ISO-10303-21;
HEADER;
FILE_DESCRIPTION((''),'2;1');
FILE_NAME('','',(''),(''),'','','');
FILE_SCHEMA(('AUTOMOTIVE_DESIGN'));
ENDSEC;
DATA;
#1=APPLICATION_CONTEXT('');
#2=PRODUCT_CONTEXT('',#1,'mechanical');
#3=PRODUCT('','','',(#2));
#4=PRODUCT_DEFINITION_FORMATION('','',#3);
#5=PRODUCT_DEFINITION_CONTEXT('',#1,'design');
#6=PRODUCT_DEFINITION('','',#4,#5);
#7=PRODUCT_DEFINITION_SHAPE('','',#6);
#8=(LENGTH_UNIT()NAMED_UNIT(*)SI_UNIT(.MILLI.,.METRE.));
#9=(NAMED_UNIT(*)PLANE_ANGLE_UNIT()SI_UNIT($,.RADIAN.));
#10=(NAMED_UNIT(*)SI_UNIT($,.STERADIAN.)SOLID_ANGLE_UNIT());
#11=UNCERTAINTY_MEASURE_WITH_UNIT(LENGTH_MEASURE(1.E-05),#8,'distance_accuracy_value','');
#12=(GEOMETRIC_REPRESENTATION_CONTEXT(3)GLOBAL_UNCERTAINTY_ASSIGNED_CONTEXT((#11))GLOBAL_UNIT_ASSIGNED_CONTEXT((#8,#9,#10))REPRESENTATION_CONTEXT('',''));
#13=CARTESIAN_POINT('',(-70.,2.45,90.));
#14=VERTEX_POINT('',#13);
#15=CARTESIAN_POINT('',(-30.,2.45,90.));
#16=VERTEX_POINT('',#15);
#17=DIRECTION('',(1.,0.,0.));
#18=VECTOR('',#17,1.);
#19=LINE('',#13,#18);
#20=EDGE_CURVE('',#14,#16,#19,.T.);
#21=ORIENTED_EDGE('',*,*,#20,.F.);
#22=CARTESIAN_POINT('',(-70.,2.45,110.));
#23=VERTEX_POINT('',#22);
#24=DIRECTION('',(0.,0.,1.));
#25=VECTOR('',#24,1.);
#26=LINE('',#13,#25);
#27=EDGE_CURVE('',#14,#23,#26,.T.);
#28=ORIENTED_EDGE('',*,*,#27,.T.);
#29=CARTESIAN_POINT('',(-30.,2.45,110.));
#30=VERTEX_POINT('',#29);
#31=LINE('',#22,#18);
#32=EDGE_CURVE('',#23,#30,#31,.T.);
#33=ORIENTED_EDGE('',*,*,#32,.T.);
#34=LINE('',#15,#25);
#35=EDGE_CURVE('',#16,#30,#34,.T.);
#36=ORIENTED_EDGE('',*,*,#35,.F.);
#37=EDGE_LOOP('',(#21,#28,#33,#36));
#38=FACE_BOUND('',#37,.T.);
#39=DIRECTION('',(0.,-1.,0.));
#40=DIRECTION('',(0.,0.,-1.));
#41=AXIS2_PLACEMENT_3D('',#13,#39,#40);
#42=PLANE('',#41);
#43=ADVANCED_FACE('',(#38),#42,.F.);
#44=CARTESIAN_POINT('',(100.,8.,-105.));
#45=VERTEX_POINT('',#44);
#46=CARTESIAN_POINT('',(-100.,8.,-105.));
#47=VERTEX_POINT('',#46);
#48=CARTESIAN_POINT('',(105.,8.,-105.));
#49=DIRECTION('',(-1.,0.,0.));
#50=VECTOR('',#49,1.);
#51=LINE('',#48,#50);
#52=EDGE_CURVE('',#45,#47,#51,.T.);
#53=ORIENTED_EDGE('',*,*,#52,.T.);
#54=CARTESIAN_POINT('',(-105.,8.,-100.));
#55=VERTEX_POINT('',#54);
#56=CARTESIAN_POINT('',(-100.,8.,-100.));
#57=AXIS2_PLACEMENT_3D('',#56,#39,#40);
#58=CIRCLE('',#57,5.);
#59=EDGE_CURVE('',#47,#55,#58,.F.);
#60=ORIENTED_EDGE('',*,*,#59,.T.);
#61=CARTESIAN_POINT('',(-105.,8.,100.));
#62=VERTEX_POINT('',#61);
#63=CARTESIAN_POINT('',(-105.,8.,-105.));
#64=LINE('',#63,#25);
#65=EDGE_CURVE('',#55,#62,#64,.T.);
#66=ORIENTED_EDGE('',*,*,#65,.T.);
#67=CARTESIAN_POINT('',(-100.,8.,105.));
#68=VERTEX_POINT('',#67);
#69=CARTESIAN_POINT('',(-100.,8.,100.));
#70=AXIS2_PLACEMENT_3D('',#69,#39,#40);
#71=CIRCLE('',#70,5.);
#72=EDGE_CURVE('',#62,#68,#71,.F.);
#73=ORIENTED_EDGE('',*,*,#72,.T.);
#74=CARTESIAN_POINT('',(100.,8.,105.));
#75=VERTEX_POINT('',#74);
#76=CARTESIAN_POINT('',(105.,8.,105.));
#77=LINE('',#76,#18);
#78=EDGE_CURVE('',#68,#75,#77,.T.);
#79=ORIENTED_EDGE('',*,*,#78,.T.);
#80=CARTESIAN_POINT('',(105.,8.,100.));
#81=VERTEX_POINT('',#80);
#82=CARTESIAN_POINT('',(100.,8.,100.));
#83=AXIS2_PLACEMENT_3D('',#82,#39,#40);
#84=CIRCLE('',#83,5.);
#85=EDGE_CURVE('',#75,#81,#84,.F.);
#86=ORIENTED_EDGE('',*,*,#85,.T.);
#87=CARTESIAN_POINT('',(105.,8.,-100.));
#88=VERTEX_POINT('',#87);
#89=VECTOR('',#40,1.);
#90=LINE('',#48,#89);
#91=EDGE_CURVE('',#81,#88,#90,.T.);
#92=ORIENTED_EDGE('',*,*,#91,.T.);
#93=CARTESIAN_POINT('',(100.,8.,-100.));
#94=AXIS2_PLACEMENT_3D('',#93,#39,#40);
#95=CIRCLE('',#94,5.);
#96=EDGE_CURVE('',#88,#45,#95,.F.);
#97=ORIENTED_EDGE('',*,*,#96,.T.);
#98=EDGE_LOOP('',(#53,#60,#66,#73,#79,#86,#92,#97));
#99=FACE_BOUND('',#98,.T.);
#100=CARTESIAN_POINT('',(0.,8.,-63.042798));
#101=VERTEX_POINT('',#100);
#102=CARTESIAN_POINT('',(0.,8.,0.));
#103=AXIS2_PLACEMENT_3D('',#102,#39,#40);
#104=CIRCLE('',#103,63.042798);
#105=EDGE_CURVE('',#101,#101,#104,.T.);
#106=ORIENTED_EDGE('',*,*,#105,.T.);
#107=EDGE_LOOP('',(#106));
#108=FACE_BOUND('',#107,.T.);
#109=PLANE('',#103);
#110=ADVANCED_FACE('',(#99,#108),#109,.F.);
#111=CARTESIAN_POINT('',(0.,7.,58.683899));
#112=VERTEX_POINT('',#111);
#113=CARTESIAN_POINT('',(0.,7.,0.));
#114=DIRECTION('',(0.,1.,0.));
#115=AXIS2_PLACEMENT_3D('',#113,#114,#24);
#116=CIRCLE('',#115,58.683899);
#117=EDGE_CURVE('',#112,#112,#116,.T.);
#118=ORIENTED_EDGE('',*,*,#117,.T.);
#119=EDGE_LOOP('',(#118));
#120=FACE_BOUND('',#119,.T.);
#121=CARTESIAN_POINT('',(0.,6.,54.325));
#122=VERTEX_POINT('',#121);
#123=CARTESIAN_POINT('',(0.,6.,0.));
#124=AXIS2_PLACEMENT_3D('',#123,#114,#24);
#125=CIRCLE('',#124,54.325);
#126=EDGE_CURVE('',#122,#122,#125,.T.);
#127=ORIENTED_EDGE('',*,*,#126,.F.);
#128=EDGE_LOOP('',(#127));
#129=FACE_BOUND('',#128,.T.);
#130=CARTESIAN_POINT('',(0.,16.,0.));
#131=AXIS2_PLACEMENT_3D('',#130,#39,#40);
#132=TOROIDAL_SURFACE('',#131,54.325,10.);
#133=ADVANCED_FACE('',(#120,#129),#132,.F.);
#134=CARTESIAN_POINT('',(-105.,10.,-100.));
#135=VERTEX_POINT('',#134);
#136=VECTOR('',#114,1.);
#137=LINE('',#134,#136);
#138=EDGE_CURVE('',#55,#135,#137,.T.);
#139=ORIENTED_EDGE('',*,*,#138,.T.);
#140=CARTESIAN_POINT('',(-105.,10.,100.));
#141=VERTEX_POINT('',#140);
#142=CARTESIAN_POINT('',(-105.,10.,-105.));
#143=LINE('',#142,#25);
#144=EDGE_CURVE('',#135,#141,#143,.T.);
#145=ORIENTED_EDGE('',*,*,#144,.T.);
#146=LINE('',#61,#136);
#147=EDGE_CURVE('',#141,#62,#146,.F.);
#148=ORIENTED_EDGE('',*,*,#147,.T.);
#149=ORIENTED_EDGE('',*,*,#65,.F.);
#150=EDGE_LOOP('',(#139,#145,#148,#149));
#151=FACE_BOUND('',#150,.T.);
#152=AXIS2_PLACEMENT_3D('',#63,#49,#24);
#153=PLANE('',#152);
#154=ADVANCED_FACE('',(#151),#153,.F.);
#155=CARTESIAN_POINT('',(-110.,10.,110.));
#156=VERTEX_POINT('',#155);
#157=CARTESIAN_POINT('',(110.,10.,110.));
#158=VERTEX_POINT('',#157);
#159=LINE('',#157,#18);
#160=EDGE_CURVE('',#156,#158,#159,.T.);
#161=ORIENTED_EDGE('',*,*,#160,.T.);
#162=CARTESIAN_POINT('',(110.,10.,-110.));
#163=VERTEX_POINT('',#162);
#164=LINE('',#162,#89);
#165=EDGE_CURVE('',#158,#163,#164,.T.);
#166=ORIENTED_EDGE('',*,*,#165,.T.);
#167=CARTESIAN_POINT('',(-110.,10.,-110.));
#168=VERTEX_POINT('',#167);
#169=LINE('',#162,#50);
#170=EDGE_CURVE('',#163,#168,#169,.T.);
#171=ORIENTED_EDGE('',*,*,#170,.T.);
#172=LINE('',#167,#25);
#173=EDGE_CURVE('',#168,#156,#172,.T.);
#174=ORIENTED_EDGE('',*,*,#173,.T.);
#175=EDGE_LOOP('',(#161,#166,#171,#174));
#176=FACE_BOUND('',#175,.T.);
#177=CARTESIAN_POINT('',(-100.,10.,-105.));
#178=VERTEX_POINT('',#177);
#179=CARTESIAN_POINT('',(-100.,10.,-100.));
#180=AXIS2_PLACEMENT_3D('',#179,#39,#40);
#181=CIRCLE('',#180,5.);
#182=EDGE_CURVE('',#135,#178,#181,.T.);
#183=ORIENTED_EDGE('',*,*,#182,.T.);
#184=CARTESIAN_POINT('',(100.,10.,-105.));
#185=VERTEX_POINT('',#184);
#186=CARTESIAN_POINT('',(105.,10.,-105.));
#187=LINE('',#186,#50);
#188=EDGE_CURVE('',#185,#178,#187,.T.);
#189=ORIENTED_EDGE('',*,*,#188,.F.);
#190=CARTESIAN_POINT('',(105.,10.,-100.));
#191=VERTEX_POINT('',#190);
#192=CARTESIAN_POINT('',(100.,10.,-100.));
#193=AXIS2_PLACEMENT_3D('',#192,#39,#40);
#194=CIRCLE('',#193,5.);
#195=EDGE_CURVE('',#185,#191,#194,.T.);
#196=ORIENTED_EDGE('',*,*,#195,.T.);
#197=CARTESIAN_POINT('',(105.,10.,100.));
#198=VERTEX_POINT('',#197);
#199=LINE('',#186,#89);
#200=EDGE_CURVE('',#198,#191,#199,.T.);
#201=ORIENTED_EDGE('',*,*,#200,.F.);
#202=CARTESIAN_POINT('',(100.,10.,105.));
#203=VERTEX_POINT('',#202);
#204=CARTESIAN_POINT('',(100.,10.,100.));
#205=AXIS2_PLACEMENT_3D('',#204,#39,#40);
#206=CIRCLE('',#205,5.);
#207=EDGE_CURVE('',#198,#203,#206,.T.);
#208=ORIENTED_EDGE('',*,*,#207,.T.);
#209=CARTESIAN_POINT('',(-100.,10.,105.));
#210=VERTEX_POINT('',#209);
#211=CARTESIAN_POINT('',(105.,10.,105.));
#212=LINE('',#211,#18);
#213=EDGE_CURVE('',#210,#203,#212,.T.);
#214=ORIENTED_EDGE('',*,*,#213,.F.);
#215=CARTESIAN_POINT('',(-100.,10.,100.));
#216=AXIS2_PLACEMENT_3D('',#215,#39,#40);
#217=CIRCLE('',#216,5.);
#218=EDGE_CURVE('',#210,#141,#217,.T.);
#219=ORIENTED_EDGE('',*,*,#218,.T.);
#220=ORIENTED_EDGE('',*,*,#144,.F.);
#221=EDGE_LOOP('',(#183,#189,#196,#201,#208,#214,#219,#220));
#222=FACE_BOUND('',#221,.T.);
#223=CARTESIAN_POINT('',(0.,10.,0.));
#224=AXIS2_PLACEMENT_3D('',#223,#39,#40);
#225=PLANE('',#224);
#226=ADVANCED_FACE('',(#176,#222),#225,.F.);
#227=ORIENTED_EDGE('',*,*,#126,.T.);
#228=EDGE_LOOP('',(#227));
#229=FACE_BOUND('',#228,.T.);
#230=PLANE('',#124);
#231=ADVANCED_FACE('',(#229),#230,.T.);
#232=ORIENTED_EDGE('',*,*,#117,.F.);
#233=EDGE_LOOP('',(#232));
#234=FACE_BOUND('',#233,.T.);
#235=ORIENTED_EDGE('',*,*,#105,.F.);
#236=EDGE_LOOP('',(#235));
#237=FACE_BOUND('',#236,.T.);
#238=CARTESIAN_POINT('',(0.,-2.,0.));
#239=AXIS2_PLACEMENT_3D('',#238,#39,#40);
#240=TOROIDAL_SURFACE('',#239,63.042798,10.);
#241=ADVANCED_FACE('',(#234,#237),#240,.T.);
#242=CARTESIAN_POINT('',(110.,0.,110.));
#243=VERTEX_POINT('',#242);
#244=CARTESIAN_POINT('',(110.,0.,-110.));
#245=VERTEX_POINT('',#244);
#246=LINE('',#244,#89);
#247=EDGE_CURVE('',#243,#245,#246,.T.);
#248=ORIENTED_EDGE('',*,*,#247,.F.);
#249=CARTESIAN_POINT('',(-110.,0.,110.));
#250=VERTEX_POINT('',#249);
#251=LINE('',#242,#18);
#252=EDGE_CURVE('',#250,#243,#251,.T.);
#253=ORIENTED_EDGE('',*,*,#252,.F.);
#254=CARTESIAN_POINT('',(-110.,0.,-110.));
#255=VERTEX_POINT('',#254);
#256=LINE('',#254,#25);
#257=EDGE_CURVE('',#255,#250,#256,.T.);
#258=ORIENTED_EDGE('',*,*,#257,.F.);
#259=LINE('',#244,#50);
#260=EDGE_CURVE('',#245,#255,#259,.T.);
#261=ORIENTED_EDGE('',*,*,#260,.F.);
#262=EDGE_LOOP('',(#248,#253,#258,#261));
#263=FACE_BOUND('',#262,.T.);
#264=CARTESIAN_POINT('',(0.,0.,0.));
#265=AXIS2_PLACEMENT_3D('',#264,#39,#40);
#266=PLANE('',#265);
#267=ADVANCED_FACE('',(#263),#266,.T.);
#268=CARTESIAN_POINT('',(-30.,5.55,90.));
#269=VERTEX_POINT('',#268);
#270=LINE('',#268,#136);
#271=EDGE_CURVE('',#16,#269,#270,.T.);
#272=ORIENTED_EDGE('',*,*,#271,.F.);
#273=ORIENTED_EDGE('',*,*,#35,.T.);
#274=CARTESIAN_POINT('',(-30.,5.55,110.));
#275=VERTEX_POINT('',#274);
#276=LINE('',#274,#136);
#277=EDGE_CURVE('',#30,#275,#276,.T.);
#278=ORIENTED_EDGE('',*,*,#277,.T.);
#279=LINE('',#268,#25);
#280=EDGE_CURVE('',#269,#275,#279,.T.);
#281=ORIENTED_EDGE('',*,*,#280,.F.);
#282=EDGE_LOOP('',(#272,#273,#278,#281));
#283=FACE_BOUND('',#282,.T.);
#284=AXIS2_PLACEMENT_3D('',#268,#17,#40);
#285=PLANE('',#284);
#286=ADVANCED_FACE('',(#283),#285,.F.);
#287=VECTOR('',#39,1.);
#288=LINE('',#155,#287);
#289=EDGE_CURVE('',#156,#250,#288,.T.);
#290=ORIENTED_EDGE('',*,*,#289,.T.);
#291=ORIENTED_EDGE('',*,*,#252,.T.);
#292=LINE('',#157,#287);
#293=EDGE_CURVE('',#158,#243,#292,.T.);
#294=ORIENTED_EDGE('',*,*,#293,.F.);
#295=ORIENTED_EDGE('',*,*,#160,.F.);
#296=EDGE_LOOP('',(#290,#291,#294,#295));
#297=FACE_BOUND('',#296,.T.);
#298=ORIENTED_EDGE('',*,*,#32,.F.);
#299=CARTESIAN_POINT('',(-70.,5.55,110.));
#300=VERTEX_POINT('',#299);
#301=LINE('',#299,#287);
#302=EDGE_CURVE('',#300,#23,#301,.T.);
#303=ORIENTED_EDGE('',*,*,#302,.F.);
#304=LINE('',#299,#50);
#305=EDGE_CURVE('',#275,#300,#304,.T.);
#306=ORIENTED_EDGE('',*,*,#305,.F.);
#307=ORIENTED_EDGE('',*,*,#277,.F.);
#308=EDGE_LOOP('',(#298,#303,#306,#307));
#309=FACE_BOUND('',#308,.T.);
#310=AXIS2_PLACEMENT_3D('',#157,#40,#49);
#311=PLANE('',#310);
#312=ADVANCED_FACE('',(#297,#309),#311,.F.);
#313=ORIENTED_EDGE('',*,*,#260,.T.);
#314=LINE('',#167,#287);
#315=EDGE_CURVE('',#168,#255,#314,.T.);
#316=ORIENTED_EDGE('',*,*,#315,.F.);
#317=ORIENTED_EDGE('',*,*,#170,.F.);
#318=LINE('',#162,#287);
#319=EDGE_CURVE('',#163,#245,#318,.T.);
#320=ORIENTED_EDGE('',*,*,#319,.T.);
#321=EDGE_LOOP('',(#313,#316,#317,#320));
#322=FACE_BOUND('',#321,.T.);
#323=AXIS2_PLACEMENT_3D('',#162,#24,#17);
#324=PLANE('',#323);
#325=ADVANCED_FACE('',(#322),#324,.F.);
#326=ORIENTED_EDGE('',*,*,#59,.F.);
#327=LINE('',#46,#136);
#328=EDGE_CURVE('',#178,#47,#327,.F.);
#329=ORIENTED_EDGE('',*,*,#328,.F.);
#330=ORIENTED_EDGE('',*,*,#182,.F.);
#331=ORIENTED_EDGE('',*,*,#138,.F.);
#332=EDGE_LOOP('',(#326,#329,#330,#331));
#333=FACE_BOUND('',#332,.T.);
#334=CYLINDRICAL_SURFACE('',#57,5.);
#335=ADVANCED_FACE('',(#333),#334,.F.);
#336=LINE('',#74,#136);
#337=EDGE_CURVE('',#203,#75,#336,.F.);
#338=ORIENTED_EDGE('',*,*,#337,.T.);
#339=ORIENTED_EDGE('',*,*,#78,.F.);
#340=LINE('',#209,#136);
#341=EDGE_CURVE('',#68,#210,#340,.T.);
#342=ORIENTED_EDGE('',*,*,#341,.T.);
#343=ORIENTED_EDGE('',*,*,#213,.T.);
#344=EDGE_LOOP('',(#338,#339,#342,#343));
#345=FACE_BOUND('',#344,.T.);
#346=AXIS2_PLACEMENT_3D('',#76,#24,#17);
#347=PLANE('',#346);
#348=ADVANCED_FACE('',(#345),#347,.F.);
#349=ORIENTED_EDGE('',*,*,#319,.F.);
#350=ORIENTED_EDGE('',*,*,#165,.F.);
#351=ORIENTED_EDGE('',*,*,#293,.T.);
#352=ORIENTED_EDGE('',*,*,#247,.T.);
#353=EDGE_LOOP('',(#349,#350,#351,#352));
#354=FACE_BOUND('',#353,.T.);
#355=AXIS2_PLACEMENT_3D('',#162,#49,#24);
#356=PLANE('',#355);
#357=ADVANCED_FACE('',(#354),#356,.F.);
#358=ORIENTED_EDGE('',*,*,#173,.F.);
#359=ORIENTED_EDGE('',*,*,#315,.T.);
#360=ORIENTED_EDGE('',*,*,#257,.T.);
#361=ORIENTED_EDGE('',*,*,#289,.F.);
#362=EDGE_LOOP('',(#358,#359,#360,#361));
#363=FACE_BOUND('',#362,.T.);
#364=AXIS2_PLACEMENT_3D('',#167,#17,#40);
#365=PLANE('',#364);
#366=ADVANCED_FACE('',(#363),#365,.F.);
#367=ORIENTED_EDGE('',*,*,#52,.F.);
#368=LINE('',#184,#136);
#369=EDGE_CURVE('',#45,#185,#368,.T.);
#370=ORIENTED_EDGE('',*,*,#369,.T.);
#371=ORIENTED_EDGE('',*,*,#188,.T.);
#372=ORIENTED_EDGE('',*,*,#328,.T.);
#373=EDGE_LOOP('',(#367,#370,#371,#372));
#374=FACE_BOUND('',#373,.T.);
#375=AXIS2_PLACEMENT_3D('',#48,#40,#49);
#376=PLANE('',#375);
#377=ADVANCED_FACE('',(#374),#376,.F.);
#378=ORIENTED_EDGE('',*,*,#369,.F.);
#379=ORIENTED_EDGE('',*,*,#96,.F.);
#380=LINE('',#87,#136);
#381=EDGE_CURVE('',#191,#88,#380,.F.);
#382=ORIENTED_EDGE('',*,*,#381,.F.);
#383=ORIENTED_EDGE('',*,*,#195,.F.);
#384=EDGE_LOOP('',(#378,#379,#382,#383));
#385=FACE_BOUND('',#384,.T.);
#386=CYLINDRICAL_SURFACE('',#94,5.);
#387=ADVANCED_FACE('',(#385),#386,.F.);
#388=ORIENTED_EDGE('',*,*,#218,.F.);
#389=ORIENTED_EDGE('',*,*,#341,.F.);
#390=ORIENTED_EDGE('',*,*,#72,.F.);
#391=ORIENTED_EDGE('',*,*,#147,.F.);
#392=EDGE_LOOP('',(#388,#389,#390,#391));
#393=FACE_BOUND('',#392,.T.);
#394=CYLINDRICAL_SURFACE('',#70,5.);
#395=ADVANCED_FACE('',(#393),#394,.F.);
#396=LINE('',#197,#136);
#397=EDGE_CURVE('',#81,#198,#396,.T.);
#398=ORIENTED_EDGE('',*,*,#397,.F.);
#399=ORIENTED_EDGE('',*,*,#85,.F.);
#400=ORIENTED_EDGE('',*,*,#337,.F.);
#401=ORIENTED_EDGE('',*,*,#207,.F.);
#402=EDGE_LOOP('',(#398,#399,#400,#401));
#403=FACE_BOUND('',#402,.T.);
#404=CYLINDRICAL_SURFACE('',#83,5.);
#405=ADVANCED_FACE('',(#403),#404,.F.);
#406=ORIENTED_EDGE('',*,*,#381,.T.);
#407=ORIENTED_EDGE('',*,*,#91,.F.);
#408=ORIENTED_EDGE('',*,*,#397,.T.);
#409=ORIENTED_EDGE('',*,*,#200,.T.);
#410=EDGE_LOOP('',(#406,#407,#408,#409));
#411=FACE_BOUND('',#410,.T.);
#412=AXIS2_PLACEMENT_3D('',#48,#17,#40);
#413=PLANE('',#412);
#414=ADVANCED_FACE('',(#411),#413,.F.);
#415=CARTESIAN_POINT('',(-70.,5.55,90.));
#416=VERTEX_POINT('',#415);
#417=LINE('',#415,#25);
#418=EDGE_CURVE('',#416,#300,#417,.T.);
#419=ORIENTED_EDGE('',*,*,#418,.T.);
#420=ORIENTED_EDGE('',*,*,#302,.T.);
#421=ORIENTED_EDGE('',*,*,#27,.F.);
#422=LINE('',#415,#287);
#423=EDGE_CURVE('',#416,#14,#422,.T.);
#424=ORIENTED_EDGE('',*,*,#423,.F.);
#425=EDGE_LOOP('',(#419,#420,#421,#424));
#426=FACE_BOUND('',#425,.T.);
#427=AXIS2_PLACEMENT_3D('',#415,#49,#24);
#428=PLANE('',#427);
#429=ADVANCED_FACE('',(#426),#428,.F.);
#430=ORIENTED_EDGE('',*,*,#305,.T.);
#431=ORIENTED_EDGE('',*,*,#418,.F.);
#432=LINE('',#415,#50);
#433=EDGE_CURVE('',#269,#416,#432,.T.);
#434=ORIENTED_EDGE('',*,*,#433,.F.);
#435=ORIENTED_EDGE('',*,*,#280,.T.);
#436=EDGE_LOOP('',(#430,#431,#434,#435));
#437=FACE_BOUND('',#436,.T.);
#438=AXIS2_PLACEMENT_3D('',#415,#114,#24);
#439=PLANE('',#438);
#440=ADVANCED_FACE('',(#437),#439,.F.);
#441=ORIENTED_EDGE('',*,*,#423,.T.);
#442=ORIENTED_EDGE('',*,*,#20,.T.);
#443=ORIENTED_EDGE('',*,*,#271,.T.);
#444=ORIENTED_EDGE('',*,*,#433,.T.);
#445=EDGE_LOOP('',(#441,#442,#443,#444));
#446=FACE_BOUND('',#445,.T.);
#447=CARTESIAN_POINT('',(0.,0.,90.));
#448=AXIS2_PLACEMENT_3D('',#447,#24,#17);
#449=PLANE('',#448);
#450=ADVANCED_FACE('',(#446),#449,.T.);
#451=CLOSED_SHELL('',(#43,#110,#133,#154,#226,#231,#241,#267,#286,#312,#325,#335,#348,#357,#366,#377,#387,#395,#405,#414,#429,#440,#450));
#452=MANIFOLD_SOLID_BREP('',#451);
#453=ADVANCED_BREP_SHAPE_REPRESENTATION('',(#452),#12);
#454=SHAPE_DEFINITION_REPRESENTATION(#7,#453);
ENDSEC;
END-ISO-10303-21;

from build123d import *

# Parameters (mm, degrees)
SKETCH1_W           = 220
SKETCH1_H           = 220
BOSS_EXTRUDE1_DEPTH = 10
SKETCH2_W           = 210
SKETCH2_H           = 210
CUT_EXTRUDE1_DEPTH  = 2
SKETCH3_R           = 60.325
CUT_EXTRUDE2_DEPTH  = 2
FILLET1_R           = 10
FILLET2_R           = 10
FILLET3_R           = 5
FILLET4_R           = 5
FILLET5_R           = 5
FILLET6_R           = 5
SKETCH4_W           = 40
SKETCH4_H           = 3.1
CUT_EXTRUDE3_DEPTH  = 20


with BuildPart() as part:
    # Sketch1 → Boss-Extrude1 (new body)
    with BuildSketch(Plane(origin=(0, 0, 0), x_dir=(1, 0, 0), z_dir=(0, 1, 0))):
        Rectangle(SKETCH1_W, SKETCH1_H)
    extrude(amount=BOSS_EXTRUDE1_DEPTH)

    # Sketch2 → Cut-Extrude1 (cut)
    with BuildSketch(Plane(origin=(0, 10, 0), x_dir=(1, 0, 0), z_dir=(0, 1, 0))):
        Rectangle(SKETCH2_W, SKETCH2_H)
    extrude(amount=-CUT_EXTRUDE1_DEPTH, mode=Mode.SUBTRACT)

    # Sketch3 → Cut-Extrude2 (cut)
    with BuildSketch(Plane(origin=(0, 8, 0), x_dir=(1, 0, 0), z_dir=(0, 1, 0))):
        with Locations(Location((0, 0, 0), (0, 0, 270))):
            Circle(SKETCH3_R)
    extrude(amount=-CUT_EXTRUDE2_DEPTH, mode=Mode.SUBTRACT)

    # Fillet1
    # the kernel refuses this fillet: 10 mm, written as the material it adds along each edge
    with BuildSketch(Plane(origin=(0, 6, 0), x_dir=(0, 0, 1), z_dir=(-1, 0, 0))) as fillet1_piece_1:
        with BuildLine():
            CenterArc((54.325, 10), FILLET1_R, 270, 36.869897646)
            Line((54.325, 0), (54.325, -0.2))
            Line((54.325, -0.2), (60.325, -0.2))
            Line((60.325, -0.2), (60.525, 0))
            ThreePointArc((60.525, 0), (60.525, 1), (60.445, 1.84))
            Line((60.445, 1.84), (60.325, 2))
        make_face()
    revolve(axis=Axis((0, 6, 0), (0, 1, 0)))

    # Fillet2
    fillet2_edges = [part.edges().sort_by_distance(p)[0] for p in [
        (0, 8, -60.325),
    ]]
    fillet(fillet2_edges, radius=FILLET2_R)

    # Fillet3
    fillet3_edges = [part.edges().sort_by_distance(p)[0] for p in [
        (-105, 9, -105),
    ]]
    fillet(fillet3_edges, radius=FILLET3_R)

    # Fillet4
    fillet4_edges = [part.edges().sort_by_distance(p)[0] for p in [
        (105, 9, -105),
    ]]
    fillet(fillet4_edges, radius=FILLET4_R)

    # Fillet5
    fillet5_edges = [part.edges().sort_by_distance(p)[0] for p in [
        (-105, 9, 105),
    ]]
    fillet(fillet5_edges, radius=FILLET5_R)

    # Fillet6
    fillet6_edges = [part.edges().sort_by_distance(p)[0] for p in [
        (105, 9, 105),
    ]]
    fillet(fillet6_edges, radius=FILLET6_R)

    # Sketch4 → Cut-Extrude3 (cut)
    with BuildSketch(Plane.XY.offset(110)):
        with Locations((-50, 4)):
            Rectangle(SKETCH4_W, SKETCH4_H)
    extrude(amount=-CUT_EXTRUDE3_DEPTH, mode=Mode.SUBTRACT)


solid = part.part
